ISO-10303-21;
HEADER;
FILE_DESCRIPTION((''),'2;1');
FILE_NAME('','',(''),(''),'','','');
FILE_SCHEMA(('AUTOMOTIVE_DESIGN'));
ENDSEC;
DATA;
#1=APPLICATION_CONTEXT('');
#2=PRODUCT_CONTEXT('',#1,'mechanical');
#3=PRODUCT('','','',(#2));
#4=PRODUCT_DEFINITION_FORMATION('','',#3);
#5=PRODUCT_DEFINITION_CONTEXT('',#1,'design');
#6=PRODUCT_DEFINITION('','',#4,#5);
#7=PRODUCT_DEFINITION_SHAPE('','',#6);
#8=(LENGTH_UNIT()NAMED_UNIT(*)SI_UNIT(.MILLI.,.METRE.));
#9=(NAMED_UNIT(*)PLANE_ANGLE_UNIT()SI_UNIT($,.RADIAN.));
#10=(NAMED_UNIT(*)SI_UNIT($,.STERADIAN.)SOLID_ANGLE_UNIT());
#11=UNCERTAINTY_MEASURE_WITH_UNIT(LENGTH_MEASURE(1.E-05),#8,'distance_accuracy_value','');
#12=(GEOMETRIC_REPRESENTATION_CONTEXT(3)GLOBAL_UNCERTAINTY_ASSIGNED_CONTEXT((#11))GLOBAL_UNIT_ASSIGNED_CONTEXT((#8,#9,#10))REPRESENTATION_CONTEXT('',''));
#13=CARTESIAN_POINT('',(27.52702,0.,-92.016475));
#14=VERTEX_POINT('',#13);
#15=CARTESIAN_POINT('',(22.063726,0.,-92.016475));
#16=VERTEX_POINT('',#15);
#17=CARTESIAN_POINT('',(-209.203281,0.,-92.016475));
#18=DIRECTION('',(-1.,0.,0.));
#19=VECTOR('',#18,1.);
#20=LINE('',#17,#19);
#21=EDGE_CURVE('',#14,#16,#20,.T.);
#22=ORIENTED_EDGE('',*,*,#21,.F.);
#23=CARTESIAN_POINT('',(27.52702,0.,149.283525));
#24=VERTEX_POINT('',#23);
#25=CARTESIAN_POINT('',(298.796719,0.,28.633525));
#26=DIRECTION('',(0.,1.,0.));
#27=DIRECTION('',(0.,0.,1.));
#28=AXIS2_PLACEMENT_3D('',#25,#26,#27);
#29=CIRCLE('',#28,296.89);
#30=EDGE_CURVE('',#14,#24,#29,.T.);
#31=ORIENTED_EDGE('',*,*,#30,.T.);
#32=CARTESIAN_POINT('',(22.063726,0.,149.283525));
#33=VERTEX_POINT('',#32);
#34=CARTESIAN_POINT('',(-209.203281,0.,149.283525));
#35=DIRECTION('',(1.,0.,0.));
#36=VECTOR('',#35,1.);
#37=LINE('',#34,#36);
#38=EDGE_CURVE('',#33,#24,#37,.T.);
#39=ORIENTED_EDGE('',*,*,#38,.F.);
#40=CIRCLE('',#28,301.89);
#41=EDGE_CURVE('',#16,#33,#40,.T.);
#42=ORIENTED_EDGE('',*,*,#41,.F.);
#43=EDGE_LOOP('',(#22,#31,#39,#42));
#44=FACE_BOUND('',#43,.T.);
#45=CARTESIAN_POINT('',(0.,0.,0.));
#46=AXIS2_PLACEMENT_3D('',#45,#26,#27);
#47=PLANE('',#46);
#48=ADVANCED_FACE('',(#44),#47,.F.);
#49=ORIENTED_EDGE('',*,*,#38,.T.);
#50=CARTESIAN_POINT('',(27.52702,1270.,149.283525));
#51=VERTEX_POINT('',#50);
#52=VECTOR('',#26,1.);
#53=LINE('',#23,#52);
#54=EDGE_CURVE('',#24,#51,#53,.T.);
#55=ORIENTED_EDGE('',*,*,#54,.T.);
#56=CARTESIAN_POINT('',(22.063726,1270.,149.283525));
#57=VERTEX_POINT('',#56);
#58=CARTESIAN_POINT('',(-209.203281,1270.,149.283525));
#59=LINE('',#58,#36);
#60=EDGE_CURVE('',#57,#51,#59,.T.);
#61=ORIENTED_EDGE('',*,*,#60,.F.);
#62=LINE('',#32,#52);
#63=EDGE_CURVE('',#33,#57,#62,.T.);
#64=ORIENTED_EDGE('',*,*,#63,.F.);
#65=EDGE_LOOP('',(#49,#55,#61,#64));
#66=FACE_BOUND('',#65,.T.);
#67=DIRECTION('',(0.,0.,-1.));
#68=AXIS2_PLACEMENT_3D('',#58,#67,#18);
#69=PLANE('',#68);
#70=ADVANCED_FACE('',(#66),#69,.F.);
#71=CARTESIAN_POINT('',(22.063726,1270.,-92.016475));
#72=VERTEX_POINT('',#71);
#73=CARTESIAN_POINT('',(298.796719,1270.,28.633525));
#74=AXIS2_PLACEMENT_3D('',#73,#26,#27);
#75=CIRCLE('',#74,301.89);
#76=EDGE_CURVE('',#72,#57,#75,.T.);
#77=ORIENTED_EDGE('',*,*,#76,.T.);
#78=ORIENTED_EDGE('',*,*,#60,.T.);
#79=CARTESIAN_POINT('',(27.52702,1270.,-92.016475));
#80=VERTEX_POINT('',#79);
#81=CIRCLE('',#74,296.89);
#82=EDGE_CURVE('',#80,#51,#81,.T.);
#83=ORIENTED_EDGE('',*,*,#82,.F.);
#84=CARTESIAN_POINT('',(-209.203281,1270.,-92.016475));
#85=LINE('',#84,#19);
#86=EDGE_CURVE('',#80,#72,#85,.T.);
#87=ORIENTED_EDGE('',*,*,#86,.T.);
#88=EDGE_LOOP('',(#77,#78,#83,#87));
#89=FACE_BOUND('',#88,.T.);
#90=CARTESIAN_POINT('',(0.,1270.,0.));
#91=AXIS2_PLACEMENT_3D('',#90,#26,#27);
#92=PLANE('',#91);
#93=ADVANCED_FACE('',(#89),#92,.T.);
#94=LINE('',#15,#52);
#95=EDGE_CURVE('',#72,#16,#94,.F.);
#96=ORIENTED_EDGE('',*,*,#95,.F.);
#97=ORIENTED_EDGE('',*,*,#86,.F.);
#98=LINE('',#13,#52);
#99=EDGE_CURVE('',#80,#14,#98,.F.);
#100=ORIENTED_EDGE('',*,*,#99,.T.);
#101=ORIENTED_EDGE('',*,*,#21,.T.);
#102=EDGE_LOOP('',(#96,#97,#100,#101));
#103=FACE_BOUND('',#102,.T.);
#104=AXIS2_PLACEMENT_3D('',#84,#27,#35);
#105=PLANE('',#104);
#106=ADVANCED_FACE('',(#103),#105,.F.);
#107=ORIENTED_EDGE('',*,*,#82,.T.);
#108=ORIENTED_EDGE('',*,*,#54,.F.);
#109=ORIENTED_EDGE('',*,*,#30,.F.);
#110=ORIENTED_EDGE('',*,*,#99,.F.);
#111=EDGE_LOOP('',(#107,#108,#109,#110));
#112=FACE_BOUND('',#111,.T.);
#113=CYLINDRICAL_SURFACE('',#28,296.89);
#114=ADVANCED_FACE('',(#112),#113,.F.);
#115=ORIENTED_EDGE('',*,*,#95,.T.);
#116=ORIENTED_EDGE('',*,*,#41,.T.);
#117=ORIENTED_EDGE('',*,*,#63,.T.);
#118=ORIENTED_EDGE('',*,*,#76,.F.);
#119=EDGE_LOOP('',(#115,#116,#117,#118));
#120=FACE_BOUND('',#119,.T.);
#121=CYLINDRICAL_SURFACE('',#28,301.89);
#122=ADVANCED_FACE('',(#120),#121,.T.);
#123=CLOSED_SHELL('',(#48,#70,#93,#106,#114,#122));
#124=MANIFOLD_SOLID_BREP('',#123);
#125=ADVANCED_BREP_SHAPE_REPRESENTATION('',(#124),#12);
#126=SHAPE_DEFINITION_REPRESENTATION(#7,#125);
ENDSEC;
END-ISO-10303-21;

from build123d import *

# Parameters (mm, degrees)
SKETCH1_W           = 508
SKETCH1_H           = 241.3
BOSS_EXTRUDE1_DEPTH = 1270
CUT_EXTRUDE4_START  = -1270
CUT_EXTRUDE4_DEPTH  = 1270


# Read off the part's stored shape, not the designer's step: Cut-Extrude4
with BuildPart() as part:
    # Sketch1 → Boss-Extrude1 (new body)
    with BuildSketch(Plane(origin=(0, 0, 0), x_dir=(1, 0, 0), z_dir=(0, 1, 0))):
        with Locations((44.796719309, -28.633525346)):
            Rectangle(SKETCH1_W, SKETCH1_H)
    extrude(amount=BOSS_EXTRUDE1_DEPTH)

    # Cut-Extrude4 outline → Cut-Extrude4 (cut)
    with BuildSketch(Plane(origin=(0, 1270, 0), x_dir=(1, 0, 0), z_dir=(0, 1, 0)).offset(CUT_EXTRUDE4_START)):
        with BuildLine():
            Line((298.796719309, 92.016474654), (27.527020301, 92.016474654))
            ThreePointArc((27.527020301, 92.016474654), (1.906719309, -28.633525346), (27.527020301, -149.283525346))
            Line((27.527020301, -149.283525346), (298.796719309, -149.283525346))
            Line((298.796719309, -149.283525346), (298.796719309, 92.016474654))
        make_face()
        with BuildLine():
            ThreePointArc((22.063725974, -149.283525346), (-3.093280691, -28.633525346), (22.063725974, 92.016474654))
            Line((22.063725974, 92.016474654), (-209.203280691, 92.016474654))
            Line((-209.203280691, 92.016474654), (-209.203280691, -149.283525346))
            Line((-209.203280691, -149.283525346), (22.063725974, -149.283525346))
        make_face()
    extrude(amount=CUT_EXTRUDE4_DEPTH, mode=Mode.SUBTRACT)


solid = part.part
